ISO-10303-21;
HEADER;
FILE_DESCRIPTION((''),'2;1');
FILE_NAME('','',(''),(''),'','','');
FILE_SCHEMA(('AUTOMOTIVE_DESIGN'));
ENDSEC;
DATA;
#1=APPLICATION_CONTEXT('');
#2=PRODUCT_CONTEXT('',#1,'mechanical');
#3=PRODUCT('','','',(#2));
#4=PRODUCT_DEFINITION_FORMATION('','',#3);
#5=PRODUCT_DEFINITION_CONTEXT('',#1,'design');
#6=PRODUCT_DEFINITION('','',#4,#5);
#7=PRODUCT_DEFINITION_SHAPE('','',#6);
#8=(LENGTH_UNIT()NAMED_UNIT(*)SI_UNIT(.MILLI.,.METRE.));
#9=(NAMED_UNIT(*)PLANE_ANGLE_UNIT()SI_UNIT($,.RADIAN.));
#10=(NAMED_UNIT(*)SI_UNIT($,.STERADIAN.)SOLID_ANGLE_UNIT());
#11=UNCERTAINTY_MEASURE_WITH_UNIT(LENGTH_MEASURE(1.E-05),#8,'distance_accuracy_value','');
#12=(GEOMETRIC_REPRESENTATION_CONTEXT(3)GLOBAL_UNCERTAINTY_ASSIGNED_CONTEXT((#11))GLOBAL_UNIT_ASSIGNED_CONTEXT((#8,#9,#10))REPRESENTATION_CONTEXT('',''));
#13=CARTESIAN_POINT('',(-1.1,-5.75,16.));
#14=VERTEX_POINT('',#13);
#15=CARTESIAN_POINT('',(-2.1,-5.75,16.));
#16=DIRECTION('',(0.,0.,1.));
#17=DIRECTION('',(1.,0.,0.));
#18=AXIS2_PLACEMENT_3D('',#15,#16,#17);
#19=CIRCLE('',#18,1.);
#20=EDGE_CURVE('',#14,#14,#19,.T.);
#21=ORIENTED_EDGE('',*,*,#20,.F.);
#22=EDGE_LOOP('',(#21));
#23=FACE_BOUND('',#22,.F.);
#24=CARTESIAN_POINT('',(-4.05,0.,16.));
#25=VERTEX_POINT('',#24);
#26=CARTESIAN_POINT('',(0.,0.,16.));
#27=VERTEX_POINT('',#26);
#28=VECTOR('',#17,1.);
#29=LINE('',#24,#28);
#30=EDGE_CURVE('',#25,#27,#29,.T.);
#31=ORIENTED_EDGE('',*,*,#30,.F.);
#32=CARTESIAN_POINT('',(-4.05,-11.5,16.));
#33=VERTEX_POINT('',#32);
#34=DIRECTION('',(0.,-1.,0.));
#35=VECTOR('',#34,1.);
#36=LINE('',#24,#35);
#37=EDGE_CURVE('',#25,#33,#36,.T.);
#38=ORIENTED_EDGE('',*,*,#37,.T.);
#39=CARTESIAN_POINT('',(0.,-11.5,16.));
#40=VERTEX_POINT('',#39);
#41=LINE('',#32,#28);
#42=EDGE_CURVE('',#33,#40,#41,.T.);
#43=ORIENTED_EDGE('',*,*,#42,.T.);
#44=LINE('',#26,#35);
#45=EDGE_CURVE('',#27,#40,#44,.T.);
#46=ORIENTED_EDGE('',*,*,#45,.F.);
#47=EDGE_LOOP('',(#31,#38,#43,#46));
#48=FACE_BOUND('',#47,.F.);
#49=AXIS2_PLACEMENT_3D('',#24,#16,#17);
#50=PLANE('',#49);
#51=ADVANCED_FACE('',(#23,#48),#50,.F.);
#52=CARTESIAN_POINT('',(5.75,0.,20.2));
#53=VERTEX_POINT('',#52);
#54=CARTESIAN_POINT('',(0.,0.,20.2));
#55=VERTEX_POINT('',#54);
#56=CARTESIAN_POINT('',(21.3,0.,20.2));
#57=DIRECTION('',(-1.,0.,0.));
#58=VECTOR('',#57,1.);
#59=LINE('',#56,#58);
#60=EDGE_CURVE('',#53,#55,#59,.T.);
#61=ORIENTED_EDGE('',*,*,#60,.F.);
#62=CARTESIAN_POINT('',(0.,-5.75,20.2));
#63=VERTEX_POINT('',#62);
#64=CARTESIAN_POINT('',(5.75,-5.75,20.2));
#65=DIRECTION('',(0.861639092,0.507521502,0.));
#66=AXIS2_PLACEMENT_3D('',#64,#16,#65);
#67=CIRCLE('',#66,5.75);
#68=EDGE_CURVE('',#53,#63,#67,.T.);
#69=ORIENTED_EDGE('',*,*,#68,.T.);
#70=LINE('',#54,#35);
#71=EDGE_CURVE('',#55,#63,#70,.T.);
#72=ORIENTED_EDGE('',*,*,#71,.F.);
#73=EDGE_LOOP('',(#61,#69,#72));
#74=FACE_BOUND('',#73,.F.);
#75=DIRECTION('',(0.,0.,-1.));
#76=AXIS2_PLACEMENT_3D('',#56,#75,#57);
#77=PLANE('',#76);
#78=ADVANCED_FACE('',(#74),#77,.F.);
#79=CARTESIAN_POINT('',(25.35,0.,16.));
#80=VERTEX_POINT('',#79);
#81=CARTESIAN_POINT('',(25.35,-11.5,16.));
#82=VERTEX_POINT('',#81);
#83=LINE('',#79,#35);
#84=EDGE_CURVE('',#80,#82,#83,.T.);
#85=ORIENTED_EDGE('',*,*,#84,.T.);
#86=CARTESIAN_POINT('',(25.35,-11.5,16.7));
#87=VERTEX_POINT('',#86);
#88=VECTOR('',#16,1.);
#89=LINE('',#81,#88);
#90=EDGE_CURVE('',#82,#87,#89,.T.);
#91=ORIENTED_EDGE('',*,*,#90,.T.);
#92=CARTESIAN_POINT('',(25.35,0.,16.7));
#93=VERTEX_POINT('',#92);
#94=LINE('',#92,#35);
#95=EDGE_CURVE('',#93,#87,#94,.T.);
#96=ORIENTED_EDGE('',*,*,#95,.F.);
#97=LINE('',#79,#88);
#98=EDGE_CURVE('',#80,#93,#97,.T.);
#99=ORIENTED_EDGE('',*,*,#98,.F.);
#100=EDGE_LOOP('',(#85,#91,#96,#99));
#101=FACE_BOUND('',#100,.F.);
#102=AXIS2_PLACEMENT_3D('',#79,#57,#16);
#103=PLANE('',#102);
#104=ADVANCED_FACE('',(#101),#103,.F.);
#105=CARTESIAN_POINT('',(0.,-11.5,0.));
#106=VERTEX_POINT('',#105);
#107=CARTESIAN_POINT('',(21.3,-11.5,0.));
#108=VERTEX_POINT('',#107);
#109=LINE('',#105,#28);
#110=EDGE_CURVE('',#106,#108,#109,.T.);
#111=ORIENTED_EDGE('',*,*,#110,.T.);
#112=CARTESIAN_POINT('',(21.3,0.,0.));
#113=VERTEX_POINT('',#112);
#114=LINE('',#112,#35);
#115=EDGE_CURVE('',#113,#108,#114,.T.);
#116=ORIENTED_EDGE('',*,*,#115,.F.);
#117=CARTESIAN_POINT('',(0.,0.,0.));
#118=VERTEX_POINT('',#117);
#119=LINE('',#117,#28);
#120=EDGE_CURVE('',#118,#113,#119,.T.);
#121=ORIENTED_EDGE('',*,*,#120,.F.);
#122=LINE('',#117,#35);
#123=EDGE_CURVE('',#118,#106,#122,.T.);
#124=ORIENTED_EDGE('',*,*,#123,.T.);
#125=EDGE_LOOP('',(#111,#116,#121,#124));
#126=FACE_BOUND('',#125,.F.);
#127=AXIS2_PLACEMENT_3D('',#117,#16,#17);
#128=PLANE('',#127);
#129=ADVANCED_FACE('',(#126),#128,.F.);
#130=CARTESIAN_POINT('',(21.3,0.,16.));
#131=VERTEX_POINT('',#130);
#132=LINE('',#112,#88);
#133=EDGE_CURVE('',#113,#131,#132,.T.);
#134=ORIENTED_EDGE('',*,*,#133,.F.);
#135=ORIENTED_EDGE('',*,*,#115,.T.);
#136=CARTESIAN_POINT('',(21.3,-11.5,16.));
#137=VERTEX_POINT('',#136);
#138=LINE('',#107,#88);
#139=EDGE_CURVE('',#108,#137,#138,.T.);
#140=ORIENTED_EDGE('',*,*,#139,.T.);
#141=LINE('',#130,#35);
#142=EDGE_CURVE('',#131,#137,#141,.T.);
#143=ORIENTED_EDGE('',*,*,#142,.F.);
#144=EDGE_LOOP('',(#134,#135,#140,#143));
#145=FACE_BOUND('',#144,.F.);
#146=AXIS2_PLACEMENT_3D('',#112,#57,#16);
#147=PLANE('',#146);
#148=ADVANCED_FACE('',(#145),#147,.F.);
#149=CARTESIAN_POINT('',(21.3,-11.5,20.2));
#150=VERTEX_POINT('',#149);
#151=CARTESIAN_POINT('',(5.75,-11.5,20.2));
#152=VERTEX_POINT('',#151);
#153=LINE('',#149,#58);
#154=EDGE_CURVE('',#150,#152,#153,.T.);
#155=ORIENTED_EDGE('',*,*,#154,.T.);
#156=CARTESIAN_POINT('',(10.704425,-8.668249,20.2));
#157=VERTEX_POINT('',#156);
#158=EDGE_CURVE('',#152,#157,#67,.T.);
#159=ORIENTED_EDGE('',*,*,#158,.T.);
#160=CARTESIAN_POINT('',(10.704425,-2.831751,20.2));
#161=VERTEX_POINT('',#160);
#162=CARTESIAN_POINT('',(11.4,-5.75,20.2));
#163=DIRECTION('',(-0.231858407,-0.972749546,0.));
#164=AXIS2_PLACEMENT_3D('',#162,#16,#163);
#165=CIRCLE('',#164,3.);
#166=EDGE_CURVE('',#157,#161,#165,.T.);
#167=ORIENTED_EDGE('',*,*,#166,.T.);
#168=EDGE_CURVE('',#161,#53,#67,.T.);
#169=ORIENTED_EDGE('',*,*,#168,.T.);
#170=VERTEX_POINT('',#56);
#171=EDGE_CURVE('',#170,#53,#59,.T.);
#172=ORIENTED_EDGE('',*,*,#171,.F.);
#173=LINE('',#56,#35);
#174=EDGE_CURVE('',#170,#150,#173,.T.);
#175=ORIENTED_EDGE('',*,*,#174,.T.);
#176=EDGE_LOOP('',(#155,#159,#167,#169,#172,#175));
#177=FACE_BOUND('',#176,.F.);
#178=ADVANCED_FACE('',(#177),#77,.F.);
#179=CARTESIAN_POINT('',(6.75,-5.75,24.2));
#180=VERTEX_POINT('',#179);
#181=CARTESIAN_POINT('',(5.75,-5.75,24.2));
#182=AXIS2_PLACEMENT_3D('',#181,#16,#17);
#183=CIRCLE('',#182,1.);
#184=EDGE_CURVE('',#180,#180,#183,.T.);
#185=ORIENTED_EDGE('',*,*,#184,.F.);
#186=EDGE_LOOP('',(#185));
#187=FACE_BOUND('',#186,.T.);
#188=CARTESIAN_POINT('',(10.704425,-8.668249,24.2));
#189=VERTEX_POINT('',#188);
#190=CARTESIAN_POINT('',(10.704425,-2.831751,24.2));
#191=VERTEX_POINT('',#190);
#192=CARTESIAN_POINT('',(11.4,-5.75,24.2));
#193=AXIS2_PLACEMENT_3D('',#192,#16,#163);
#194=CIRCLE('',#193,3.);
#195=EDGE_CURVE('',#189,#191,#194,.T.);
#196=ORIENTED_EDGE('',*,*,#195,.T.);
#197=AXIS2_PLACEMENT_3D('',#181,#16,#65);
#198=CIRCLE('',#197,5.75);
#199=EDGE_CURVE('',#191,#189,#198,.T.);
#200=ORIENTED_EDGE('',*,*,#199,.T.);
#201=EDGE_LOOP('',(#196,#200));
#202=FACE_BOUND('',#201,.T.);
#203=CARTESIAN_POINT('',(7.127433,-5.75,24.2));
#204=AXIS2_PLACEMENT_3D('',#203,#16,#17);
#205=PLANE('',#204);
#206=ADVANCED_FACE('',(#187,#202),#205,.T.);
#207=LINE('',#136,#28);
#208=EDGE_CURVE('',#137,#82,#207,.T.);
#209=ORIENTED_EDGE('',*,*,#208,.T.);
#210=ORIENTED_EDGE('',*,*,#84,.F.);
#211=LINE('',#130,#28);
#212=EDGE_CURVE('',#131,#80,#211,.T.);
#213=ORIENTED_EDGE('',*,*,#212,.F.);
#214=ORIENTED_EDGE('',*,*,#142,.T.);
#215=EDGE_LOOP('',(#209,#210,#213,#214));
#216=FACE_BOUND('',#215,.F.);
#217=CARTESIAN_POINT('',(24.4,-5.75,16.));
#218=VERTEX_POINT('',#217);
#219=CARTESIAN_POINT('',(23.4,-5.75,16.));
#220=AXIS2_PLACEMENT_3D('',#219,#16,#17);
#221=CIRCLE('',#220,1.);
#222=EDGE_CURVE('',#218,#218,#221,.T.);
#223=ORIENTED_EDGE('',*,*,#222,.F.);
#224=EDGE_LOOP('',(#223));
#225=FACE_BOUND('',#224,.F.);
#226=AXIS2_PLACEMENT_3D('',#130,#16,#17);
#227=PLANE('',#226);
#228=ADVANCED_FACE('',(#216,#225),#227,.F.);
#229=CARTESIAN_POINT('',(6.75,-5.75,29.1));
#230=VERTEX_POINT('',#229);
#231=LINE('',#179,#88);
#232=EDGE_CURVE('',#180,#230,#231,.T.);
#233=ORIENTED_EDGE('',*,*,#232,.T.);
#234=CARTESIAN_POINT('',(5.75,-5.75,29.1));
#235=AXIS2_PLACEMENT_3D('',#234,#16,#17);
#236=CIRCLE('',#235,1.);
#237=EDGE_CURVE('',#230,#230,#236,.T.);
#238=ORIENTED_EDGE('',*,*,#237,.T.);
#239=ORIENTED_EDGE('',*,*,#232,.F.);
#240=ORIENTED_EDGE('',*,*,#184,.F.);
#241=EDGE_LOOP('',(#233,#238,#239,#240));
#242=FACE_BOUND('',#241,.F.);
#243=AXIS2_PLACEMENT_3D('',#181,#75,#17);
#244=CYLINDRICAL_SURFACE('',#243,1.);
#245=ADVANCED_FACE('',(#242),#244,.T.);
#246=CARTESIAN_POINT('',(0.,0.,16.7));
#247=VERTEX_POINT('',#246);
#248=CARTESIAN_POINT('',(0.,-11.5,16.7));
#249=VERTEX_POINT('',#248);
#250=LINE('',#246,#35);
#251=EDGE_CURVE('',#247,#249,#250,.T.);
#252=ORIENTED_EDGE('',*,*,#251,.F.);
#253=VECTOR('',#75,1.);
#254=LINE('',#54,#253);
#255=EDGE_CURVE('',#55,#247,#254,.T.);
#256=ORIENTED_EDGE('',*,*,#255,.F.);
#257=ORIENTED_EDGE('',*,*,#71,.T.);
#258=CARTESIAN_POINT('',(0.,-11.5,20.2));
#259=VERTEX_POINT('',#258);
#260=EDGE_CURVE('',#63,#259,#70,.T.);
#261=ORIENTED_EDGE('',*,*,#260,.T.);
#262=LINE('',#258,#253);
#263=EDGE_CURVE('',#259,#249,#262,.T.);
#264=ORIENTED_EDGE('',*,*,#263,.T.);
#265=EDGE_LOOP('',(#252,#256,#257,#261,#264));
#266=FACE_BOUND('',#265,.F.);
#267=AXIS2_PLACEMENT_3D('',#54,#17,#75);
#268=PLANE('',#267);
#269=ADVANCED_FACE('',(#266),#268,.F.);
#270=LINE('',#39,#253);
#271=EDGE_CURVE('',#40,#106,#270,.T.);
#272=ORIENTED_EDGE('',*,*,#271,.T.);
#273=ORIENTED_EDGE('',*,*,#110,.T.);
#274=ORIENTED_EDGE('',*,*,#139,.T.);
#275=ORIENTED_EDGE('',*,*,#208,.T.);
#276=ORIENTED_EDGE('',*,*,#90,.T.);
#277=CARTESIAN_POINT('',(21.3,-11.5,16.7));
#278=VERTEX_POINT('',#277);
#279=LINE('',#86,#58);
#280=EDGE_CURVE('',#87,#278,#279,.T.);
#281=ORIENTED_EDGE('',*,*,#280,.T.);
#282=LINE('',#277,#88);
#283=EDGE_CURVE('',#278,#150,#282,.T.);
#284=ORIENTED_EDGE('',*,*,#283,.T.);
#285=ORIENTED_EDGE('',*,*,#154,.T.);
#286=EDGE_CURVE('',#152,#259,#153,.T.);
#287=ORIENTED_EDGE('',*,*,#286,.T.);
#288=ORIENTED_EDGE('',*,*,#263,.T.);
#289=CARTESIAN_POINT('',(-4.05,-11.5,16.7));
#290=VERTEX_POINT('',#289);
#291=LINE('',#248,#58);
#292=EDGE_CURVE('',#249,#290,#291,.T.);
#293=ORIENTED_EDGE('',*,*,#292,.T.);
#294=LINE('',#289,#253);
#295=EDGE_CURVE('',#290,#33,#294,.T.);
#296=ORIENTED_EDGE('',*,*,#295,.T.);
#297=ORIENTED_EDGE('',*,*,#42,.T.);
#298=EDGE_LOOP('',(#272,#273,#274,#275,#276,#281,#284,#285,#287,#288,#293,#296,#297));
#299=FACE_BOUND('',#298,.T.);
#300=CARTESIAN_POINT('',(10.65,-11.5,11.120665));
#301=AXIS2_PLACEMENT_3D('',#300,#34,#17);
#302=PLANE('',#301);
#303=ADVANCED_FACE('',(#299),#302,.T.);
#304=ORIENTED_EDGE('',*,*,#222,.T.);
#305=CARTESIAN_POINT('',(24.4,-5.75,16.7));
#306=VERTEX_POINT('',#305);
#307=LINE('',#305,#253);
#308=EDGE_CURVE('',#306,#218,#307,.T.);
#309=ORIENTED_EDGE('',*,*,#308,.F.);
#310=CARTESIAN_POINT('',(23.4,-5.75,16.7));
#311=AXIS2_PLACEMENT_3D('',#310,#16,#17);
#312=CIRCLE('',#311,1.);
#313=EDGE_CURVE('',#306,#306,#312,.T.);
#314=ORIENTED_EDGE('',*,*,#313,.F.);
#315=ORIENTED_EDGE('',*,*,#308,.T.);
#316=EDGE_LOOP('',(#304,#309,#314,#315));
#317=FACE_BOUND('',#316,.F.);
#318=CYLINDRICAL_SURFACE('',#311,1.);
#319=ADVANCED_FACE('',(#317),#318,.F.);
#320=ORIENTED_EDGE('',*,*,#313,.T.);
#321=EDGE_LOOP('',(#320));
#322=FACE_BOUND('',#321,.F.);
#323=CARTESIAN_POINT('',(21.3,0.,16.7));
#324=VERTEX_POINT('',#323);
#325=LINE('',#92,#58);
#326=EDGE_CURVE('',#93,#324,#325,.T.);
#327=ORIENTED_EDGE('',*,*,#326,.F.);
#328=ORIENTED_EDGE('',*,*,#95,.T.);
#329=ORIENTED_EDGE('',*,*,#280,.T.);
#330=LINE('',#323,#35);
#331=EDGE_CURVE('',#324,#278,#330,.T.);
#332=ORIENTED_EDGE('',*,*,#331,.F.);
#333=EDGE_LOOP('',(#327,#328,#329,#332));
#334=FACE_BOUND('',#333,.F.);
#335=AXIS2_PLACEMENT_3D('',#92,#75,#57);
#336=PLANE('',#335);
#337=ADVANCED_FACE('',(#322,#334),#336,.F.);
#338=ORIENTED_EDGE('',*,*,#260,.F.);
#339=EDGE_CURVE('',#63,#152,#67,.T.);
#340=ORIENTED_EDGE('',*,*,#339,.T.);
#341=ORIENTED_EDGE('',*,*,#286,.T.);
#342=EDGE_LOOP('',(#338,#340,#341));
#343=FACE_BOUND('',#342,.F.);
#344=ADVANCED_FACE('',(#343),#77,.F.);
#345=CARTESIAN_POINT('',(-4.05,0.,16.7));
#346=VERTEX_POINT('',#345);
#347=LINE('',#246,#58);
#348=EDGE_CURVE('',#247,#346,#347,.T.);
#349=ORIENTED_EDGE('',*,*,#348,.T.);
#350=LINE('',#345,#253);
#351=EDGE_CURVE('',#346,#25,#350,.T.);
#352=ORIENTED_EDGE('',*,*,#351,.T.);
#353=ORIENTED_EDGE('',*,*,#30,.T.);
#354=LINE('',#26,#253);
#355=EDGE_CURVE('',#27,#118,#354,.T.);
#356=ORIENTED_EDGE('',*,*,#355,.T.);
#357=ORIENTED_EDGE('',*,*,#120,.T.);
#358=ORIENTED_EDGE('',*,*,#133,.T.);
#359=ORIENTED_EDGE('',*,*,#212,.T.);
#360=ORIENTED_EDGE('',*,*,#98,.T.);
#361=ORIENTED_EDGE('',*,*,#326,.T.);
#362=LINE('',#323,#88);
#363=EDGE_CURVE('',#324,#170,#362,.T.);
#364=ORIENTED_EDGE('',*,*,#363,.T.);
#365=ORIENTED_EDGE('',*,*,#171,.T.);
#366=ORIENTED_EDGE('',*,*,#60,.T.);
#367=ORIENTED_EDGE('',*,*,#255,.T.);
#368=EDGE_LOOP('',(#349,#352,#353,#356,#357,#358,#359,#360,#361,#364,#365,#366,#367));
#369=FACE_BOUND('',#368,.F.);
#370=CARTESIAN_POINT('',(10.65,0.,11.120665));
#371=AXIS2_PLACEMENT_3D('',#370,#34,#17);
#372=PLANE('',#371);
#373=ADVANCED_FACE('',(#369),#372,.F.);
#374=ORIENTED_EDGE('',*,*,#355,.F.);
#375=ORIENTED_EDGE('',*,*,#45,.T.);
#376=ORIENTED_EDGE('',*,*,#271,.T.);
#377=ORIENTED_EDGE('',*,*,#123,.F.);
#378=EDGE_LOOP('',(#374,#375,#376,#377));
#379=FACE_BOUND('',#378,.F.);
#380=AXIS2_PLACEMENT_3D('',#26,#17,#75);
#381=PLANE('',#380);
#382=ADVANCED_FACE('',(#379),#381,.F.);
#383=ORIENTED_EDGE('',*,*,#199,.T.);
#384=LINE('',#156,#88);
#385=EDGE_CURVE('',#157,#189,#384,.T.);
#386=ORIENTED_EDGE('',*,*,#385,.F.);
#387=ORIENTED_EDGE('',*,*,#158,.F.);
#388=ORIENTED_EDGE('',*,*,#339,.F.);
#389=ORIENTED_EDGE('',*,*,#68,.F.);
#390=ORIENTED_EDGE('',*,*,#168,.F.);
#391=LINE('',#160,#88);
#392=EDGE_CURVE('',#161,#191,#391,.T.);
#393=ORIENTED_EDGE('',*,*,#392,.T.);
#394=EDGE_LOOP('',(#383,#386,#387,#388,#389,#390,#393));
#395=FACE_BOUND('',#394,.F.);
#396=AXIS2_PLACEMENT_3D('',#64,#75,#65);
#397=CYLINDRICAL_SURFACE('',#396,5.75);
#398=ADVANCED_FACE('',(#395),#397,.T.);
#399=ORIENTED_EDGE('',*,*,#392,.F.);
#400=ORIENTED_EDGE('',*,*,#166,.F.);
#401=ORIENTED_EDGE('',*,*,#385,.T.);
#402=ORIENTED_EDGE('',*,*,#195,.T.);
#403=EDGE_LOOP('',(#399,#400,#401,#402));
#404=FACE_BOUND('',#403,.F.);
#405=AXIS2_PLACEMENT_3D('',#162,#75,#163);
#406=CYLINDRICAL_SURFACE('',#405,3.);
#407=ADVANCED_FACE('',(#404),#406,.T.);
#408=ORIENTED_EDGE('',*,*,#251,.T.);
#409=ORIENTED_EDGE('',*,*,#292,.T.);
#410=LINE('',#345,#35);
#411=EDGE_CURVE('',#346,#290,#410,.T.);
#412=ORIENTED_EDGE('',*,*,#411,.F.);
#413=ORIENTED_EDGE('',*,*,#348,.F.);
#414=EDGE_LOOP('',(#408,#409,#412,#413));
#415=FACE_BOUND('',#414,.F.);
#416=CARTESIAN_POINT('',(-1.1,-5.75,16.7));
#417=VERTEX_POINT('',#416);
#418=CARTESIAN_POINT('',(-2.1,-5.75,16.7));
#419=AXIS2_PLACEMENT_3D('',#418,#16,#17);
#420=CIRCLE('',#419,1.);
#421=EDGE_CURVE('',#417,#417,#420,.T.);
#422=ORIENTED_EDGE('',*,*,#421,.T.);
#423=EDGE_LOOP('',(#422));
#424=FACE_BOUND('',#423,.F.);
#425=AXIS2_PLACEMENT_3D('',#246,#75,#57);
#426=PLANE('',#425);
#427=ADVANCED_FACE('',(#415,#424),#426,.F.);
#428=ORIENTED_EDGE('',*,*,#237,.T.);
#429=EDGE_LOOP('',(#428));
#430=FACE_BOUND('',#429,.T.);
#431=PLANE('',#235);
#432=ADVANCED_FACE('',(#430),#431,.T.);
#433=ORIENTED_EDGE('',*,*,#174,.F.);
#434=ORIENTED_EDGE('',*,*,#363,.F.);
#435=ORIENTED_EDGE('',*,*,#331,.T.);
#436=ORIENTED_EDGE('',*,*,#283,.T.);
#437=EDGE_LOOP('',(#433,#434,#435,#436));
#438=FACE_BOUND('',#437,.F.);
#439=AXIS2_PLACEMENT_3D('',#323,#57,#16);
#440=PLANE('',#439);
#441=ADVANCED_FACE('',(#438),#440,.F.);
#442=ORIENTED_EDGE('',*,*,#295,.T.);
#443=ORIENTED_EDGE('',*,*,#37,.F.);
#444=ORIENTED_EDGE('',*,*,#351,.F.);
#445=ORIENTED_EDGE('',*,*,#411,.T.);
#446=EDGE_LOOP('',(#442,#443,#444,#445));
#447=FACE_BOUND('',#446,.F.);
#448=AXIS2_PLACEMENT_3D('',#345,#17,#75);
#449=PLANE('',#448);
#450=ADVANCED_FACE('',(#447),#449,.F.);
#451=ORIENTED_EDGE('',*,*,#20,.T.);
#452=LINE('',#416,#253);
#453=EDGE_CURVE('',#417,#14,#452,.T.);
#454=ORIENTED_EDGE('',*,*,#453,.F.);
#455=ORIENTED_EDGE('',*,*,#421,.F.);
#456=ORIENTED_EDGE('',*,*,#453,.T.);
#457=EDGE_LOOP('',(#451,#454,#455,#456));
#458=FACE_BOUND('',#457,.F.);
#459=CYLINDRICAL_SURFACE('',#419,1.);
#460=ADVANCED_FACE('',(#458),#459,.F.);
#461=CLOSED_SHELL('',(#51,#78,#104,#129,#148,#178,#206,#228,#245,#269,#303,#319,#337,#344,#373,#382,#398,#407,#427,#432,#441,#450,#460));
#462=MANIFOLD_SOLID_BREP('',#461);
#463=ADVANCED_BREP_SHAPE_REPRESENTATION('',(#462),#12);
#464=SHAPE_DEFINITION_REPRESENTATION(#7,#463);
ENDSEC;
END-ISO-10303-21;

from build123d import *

# Parameters (mm, degrees)
F1_DEPTH = 11.5
F3_DEPTH = 4
F4_R     = 1
F5_DEPTH = 0.7
F6_R     = 1
F7_DEPTH = 0.7
F8_R     = 1
F9_DEPTH = 4.9


# Not quite as in the source:
# - a feature of the source that left no trace in its solid (it failed there, or was rolled back) is left out


with BuildPart() as f1:
    # F0 (on Front) → F1 (new body)
    with BuildSketch(Plane.XZ):
        Polygon((0, 16), (0, 0), (21.3, 0), (21.3, 16), (25.35, 16), (25.35, 16.7), (21.3, 16.7), (21.3, 20.2), (0, 20.2), (0, 16.7), (-4.05, 16.7), (-4.05, 16), align=None)
    extrude(amount=F1_DEPTH)

    # F2 (on face) → F3 (join)
    with BuildSketch(Plane.XY.offset(20.2)):
        with BuildLine():
            ThreePointArc((10.7044247788, -8.6682486377), (14.4, -5.75), (10.7044247788, -2.8317513623))
            ThreePointArc((10.7044247788, -2.8317513623), (0, -5.75), (10.7044247788, -8.6682486377))
        make_face()
    extrude(amount=F3_DEPTH)

    # F4 (on face) → F5 (cut, through all)
    with BuildSketch(Plane.XY.offset(16.7)):
        with Locations((-2.1, -5.75)):
            Circle(F4_R)
    extrude(amount=-F5_DEPTH, mode=Mode.SUBTRACT)

    # F6 (on face) → F7 (cut, through all)
    with BuildSketch(Plane.XY.offset(16.7)):
        with Locations((23.4, -5.75)):
            Circle(F6_R)
    extrude(amount=-F7_DEPTH, mode=Mode.SUBTRACT)

    # F8 (on face) → F9 (join)
    with BuildSketch(Plane.XY.offset(24.2)):
        with Locations((5.75, -5.75)):
            Circle(F8_R)
    extrude(amount=F9_DEPTH)


solid = f1.part
